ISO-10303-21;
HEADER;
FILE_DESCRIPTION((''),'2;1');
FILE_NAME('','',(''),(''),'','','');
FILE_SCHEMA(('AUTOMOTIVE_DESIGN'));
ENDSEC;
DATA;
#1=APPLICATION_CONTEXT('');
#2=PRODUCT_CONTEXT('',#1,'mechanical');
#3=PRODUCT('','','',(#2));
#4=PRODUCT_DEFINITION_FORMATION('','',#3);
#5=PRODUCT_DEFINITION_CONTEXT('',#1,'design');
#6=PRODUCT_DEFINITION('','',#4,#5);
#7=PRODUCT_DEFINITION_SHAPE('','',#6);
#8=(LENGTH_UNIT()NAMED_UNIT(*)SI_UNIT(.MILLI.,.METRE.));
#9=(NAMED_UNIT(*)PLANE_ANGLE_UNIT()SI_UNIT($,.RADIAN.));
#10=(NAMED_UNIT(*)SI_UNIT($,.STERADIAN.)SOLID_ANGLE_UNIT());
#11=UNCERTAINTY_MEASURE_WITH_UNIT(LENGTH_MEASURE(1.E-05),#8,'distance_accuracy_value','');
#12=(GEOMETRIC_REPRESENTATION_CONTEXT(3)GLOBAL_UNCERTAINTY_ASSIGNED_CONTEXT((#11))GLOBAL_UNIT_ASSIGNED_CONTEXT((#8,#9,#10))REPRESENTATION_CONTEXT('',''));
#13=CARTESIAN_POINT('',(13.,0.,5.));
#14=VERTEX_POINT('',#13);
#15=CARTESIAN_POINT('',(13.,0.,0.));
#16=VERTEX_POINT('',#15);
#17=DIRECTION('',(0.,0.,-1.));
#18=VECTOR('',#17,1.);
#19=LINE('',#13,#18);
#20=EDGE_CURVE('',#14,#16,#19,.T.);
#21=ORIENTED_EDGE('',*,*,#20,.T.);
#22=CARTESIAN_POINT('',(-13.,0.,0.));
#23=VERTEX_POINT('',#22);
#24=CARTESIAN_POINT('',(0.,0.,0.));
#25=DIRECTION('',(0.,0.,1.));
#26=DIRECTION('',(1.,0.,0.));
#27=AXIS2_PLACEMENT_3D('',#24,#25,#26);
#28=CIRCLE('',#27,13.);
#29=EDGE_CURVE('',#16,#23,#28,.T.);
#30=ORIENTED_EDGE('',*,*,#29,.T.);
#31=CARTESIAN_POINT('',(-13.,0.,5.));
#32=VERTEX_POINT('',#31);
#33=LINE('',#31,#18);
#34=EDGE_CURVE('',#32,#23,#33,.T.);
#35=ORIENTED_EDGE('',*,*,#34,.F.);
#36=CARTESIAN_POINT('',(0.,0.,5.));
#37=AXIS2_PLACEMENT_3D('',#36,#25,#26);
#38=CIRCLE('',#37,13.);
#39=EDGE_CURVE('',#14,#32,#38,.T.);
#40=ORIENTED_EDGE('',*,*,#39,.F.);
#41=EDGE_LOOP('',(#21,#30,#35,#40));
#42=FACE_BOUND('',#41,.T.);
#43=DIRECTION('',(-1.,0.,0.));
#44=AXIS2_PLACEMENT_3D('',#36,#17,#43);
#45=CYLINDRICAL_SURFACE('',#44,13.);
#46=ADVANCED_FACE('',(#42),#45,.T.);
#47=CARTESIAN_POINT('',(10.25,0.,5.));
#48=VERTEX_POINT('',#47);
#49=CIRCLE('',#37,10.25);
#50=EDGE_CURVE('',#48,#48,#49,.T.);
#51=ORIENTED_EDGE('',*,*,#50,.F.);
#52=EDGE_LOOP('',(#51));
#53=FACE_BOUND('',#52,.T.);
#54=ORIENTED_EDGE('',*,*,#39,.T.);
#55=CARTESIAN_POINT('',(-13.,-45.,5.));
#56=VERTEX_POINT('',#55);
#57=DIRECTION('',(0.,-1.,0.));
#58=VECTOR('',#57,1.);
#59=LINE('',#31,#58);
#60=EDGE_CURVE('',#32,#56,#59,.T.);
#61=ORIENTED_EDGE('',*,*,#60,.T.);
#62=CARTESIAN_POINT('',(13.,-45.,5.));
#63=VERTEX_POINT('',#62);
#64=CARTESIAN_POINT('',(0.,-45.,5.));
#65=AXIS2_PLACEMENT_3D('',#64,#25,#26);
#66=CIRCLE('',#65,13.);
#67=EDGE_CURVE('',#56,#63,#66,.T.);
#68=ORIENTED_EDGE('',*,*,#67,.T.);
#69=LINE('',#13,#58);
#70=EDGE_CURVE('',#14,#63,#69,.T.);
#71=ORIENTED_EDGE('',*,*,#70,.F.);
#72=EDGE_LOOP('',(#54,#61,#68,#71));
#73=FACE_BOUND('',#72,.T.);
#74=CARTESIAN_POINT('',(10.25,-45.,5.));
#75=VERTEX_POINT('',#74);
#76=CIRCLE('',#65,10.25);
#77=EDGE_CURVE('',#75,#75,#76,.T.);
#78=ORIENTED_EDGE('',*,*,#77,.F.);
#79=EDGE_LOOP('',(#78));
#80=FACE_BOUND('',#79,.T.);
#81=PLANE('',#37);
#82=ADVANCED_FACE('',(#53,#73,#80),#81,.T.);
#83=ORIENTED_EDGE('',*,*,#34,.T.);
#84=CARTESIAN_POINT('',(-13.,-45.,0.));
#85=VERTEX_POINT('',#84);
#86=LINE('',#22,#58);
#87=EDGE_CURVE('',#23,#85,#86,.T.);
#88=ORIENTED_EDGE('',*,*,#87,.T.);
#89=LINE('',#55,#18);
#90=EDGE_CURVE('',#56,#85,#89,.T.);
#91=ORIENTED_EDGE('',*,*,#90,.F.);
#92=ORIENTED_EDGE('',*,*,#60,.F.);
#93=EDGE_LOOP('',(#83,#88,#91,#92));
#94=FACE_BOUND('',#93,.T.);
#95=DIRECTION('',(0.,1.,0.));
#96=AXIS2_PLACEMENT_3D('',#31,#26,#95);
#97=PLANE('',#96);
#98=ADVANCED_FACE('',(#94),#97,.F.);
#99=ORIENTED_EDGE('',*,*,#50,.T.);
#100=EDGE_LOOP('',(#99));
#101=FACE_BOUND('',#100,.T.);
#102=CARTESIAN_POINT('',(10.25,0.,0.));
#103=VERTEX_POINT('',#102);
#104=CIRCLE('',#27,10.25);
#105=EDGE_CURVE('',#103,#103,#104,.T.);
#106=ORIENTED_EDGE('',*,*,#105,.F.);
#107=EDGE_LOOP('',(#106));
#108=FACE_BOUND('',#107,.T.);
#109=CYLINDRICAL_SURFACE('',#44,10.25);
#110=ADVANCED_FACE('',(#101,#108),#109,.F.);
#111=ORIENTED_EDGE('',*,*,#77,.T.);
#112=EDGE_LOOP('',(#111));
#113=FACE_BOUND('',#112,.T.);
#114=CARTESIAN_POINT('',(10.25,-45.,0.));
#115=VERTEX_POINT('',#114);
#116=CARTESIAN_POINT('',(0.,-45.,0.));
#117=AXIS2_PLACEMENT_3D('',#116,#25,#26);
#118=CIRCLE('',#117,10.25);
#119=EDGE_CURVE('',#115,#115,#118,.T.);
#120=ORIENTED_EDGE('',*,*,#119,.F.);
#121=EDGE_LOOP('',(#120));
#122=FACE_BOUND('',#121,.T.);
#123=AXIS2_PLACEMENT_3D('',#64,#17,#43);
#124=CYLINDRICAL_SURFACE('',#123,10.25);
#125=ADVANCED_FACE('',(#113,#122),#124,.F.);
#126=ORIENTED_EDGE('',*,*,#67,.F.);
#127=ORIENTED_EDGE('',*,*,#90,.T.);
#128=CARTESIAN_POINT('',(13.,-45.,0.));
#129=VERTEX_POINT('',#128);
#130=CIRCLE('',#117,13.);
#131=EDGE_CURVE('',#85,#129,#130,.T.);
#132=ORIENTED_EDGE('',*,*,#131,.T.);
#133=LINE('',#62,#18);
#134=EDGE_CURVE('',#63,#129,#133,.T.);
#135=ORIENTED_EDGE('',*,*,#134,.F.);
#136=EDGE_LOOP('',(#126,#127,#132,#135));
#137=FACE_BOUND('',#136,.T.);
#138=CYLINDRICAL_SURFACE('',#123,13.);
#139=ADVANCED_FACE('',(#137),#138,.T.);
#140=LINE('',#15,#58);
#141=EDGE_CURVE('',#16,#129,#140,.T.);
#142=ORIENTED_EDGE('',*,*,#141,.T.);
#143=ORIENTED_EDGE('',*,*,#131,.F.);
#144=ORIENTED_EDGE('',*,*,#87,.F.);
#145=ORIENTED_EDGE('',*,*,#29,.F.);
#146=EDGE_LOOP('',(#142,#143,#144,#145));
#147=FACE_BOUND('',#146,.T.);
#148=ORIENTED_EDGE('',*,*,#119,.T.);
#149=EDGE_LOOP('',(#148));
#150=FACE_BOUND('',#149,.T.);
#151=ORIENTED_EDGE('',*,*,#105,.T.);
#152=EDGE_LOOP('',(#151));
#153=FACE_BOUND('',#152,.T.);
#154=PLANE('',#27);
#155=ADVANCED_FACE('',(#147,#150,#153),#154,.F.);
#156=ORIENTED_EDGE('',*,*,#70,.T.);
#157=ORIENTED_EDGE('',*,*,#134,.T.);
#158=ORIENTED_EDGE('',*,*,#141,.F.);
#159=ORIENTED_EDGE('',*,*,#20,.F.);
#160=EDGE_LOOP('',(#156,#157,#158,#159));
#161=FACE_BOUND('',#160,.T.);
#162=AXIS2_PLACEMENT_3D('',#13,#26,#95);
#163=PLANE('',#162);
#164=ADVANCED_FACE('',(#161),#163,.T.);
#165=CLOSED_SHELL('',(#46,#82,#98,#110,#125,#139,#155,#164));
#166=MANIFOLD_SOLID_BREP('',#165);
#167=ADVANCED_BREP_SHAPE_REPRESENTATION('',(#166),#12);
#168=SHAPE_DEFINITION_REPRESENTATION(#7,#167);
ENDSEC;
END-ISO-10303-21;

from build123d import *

# Parameters (mm, degrees)
SKETCH1_R           = 10.25
BOSS_EXTRUDE1_DEPTH = 5


with BuildPart() as part:
    # Sketch1 → Boss-Extrude1 (new body)
    with BuildSketch(Plane.XY):
        with BuildLine():
            Line((13, -45), (13, 0))
            ThreePointArc((13, 0), (0, 13), (-13, 0))
            Line((-13, 0), (-13, -45))
            ThreePointArc((-13, -45), (0, -58), (13, -45))
        make_face()
        with Locations((0, -45)):
            Circle(SKETCH1_R, mode=Mode.SUBTRACT)
        Circle(SKETCH1_R, mode=Mode.SUBTRACT)
    extrude(amount=BOSS_EXTRUDE1_DEPTH)


solid = part.part
